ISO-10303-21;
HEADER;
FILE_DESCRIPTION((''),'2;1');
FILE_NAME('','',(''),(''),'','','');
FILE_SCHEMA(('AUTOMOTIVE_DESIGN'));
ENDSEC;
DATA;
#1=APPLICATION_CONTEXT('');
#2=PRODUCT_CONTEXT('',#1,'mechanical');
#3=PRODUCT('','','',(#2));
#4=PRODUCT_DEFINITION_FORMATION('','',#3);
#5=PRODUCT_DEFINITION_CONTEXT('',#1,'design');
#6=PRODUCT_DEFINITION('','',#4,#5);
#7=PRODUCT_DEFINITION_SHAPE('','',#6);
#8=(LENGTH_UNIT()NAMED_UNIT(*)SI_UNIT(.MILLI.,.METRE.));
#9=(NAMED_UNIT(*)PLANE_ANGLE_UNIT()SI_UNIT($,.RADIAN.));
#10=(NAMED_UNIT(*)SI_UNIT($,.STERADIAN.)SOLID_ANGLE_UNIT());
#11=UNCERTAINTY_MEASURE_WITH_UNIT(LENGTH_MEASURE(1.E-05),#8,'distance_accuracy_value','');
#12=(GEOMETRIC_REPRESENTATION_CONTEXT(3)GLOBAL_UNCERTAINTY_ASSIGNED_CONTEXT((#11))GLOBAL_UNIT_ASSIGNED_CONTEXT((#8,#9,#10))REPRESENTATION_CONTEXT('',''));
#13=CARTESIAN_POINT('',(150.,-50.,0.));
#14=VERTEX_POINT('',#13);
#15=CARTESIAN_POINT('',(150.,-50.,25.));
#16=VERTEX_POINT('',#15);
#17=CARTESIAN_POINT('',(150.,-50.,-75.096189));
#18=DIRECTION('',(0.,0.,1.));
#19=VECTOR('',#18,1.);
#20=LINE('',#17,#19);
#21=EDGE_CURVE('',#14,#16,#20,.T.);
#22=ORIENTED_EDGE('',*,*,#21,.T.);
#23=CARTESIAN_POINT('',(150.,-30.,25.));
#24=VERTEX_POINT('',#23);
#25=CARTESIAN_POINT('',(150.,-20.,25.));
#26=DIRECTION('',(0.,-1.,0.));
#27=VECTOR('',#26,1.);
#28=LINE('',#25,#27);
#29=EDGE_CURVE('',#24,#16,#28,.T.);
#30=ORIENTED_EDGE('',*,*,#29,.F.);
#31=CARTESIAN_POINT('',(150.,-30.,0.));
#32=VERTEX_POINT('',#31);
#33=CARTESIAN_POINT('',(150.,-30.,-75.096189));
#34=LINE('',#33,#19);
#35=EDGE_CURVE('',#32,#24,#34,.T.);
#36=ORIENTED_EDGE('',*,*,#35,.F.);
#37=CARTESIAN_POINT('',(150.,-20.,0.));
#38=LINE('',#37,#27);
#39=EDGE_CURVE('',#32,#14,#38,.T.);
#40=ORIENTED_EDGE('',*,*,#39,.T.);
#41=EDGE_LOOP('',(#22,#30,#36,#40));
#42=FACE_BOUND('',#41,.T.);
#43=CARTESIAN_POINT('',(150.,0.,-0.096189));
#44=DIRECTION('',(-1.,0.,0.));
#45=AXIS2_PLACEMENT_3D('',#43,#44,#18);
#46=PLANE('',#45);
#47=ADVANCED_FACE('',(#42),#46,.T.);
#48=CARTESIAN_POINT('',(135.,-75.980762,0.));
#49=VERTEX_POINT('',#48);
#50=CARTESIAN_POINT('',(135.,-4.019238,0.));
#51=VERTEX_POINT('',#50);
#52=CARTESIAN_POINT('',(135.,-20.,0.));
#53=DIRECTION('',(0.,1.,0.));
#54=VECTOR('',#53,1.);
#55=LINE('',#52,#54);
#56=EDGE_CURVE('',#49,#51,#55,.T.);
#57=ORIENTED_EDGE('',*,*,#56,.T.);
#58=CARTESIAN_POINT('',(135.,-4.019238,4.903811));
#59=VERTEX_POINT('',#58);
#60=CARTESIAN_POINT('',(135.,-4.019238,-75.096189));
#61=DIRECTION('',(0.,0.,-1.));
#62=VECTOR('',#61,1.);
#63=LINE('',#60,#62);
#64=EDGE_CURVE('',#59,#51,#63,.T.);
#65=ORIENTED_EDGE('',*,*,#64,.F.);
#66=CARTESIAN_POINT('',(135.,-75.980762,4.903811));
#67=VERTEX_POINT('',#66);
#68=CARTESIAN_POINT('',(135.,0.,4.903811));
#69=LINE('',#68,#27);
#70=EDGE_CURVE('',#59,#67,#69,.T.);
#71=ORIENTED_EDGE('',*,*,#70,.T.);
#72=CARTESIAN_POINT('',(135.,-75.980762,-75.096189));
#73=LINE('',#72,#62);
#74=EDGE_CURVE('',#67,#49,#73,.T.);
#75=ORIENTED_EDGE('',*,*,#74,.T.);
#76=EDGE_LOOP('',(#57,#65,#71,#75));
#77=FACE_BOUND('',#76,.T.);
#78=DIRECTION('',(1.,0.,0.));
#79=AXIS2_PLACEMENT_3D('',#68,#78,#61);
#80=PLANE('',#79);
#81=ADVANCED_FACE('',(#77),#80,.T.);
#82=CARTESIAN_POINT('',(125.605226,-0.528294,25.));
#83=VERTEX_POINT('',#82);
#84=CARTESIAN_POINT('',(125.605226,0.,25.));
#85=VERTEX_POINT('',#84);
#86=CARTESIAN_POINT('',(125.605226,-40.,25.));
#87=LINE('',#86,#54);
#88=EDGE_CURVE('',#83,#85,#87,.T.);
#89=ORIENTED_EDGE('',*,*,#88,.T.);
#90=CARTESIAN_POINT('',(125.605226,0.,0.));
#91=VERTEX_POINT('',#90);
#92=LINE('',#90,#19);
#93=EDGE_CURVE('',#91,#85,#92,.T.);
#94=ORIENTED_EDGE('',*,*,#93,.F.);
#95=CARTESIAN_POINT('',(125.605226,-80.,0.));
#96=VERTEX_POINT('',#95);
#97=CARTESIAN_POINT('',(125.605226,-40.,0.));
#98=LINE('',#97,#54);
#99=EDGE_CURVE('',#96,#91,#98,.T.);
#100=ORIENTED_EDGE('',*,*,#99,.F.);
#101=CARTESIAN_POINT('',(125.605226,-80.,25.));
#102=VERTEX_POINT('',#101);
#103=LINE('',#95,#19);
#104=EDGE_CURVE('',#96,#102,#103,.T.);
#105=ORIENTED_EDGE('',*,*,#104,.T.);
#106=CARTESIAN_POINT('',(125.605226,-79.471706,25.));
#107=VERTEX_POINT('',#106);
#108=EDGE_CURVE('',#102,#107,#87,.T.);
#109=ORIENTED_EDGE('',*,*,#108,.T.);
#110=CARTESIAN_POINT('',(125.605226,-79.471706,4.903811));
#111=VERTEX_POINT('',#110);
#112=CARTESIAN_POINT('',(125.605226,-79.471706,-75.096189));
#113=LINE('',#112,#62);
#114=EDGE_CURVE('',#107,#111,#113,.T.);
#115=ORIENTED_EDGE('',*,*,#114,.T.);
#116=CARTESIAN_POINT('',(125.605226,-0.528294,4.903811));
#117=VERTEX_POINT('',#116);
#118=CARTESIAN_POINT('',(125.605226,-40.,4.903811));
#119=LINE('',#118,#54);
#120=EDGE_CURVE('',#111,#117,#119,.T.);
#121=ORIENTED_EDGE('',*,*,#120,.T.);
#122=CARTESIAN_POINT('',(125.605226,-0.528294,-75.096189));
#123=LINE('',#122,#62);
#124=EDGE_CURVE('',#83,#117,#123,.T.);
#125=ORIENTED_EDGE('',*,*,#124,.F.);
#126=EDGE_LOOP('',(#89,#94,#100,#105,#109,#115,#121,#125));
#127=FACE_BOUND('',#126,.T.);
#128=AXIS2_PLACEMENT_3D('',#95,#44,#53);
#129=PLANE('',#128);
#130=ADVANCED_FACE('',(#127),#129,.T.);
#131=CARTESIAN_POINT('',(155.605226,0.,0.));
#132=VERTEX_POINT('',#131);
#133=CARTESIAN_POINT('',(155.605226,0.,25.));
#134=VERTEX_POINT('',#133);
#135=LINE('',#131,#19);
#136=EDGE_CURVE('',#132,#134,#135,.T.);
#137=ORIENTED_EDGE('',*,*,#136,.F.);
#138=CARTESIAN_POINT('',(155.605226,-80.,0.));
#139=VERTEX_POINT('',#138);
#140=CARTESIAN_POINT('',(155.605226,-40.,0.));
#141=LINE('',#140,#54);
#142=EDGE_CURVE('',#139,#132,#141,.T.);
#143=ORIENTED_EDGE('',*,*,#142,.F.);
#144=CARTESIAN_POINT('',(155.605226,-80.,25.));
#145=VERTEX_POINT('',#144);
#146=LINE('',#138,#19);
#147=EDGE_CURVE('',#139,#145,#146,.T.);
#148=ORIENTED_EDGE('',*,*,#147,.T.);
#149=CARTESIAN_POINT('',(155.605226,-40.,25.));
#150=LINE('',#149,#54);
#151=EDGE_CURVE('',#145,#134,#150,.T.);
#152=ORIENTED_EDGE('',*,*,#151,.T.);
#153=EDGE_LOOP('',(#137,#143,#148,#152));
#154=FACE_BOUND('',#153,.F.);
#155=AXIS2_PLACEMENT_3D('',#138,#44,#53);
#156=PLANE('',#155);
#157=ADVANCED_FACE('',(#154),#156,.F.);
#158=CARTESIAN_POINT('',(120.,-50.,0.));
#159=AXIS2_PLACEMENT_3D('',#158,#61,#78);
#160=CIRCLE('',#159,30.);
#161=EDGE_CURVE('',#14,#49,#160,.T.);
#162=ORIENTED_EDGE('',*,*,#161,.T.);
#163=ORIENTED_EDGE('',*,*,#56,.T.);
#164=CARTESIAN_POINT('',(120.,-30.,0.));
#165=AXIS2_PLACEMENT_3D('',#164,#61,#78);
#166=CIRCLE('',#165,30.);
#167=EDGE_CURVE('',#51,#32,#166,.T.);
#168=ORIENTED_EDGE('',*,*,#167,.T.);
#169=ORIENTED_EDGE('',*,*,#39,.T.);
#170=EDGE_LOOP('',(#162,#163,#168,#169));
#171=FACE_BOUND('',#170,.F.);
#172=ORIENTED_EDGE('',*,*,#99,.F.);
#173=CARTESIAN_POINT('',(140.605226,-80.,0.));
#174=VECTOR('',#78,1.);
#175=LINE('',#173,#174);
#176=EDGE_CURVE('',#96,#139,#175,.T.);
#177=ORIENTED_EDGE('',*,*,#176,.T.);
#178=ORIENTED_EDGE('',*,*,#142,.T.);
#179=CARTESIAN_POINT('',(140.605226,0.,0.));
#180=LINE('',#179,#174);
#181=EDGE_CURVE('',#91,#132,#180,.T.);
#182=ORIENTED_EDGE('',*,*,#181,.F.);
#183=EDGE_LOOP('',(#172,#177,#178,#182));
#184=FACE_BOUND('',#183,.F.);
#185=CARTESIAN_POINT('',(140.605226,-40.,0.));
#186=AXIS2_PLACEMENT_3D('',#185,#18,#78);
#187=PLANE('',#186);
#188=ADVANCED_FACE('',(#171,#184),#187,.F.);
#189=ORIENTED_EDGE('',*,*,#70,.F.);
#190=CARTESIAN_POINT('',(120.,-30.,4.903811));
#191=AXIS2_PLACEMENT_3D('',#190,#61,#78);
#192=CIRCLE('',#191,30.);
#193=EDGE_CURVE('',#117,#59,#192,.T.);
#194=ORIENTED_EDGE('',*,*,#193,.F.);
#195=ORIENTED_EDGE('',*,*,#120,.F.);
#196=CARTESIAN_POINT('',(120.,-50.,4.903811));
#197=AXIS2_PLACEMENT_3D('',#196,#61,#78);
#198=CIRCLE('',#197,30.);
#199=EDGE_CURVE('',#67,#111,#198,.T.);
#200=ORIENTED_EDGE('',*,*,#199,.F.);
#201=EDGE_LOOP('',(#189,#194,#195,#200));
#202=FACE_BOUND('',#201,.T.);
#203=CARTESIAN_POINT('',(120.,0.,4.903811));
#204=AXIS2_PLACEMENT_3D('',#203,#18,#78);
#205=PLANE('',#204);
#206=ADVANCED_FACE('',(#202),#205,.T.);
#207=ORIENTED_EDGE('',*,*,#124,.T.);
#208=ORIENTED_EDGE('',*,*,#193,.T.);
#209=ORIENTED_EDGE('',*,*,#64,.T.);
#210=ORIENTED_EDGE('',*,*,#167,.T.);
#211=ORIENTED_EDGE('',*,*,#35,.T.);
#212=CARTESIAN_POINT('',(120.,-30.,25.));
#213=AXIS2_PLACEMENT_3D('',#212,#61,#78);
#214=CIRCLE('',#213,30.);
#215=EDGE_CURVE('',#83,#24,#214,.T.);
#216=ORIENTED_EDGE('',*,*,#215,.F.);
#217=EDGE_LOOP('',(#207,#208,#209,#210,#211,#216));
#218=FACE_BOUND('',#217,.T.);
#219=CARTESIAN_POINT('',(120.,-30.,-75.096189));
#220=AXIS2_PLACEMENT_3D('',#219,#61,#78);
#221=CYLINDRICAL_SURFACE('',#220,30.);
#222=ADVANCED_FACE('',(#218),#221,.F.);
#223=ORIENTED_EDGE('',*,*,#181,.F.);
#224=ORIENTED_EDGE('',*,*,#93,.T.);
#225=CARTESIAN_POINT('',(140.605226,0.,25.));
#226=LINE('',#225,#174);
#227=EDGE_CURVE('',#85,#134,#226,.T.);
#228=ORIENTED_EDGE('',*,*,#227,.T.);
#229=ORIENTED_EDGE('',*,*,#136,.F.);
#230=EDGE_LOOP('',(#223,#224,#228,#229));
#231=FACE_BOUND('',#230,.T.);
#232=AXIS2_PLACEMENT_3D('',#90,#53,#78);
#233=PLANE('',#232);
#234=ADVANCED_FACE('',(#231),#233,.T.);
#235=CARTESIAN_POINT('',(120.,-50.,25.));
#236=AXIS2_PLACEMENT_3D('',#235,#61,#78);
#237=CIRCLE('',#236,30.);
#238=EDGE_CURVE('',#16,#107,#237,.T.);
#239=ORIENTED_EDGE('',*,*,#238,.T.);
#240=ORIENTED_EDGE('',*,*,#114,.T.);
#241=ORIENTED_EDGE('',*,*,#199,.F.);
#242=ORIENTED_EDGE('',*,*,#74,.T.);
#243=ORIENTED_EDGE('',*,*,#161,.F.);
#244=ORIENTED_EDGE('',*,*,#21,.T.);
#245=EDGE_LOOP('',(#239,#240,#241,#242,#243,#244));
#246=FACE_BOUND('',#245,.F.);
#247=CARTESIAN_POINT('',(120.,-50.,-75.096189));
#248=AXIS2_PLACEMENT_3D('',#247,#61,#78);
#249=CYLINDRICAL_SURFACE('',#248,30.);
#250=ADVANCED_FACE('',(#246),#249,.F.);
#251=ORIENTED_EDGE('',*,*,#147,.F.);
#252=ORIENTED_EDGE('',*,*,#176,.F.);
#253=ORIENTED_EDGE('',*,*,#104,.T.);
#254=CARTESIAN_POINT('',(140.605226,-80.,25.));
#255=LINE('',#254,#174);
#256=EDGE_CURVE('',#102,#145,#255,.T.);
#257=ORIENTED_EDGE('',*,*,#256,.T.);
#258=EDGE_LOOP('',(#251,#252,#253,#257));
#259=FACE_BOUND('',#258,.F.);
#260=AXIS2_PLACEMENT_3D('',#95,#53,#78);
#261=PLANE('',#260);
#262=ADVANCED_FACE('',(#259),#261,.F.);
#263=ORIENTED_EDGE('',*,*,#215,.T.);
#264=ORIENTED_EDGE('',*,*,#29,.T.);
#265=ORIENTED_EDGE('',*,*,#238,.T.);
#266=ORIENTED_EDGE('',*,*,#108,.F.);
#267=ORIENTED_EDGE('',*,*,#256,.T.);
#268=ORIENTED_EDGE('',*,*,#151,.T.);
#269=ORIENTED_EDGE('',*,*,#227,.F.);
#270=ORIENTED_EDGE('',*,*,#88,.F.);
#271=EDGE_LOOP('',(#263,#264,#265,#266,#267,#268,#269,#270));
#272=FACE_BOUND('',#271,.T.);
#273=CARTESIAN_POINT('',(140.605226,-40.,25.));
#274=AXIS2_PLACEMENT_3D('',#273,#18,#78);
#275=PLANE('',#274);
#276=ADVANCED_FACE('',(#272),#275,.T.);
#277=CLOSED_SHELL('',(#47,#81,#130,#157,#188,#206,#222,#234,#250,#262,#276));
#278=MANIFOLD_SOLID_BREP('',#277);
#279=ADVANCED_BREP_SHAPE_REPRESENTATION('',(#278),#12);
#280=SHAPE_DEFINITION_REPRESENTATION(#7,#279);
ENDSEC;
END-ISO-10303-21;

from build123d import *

# Parameters (mm, degrees)
F1_DEPTH    = 80
F2_T1_DEPTH = 140
F2_T3_DEPTH = 85
F2_T6_ANGLE = 90
F2_T8_ANGLE = 90
F3_W        = 30
F3_H        = 80
F4_DEPTH    = 25


# Not quite as in the source:
# - a fillet or chamfer that OpenCascade refuses, or shapes differently, is made with other operations: its cross-section is extruded or revolved along the edge and cut away or added


with BuildPart() as f1:
    # F0 (on Front) → F1 (new body)
    with BuildSketch(Plane.XZ):
        with BuildLine():
            Line((85, 129.9038105677), (75, 129.9038105677))
            Line((75, 129.9038105677), (0, 0))
            Line((0, 0), (16.9389196682, 0))
            Line((16.9389196682, 0), (16.9389196682, 4.9038105677))
            Line((16.9389196682, 4.9038105677), (34.5854811567, 4.9038105677))
            Line((34.5854811567, 4.9038105677), (34.5854811567, 6.5063509461))
            ThreePointArc((34.5854811567, 6.5063509461), (36.2891898423, 19.4473032012), (41.2842109675, 31.5063509461))
            Line((41.2842109675, 31.5063509461), (86.5319459163, 109.8777268049))
            ThreePointArc((86.5319459163, 109.8777268049), (117.3568969946, 96.1773012088), (130, 64.9038105677))
            ThreePointArc((130, 64.9038105677), (127.4711560413, 41.3606586971), (120, 18.8916382651))
            Line((120, 18.8916382651), (120, 4.9038105677))
            Line((120, 4.9038105677), (135, 4.9038105677))
            Line((135, 4.9038105677), (135, -0.0961894323))
            Line((135, -0.0961894323), (150, -0.0961894323))
            Line((150, -0.0961894323), (150, 64.9038105677))
            ThreePointArc((150, 64.9038105677), (130.9619407771, 110.8657513448), (85, 129.9038105677))
        make_face()
    extrude(amount=F1_DEPTH)

    # F2: fillet of radius 30 on 2 edges, made by hand

    # F2_s2 → F2_t1 (cut)
    with BuildSketch(Plane.XY.offset(-75.0961894323)):
        with BuildLine():
            ThreePointArc((150, -50), (141.2132034356, -71.2132034356), (120, -80))
            Line((120, -80), (150, -80))
            Line((150, -80), (150, -50))
        make_face()
        with BuildLine():
            ThreePointArc((150, -30), (141.2132034356, -8.7867965644), (120, 0))
            Line((120, 0), (150, 0))
            Line((150, 0), (150, -30))
        make_face()
    extrude(amount=F2_T1_DEPTH, mode=Mode.SUBTRACT)

    # F2_s4 → F2_t3 (cut)
    with BuildSketch(Plane.YZ):
        with BuildLine():
            ThreePointArc((-50, 129.9038105677), (-71.2132034356, 121.1170140033), (-80, 99.9038105677))
            Line((-80, 99.9038105677), (-80, 129.9038105677))
            Line((-80, 129.9038105677), (-50, 129.9038105677))
        make_face()
        with BuildLine():
            ThreePointArc((-30, 129.9038105677), (-8.7867965644, 121.1170140033), (0, 99.9038105677))
            Line((0, 99.9038105677), (0, 129.9038105677))
            Line((0, 129.9038105677), (-30, 129.9038105677))
        make_face()
    extrude(amount=F2_T3_DEPTH, mode=Mode.SUBTRACT)

    # F2_s5 → F2_t6 (revolve, cut)
    with BuildSketch(Plane.XY.offset(64.9038105677)):
        with BuildLine():
            ThreePointArc((150, -30), (141.2132034356, -8.7867965644), (120, 0))
            Line((120, 0), (150, 0))
            Line((150, 0), (150, -30))
        make_face()
    revolve(axis=Axis((85, 0, 64.9038105677), (0, -1, 0)), revolution_arc=F2_T6_ANGLE, mode=Mode.SUBTRACT)

    # F2_s7 → F2_t8 (revolve, cut)
    with BuildSketch(Plane.XY.offset(64.9038105677)):
        with BuildLine():
            ThreePointArc((150, -50), (141.2132034356, -71.2132034356), (120, -80))
            Line((120, -80), (150, -80))
            Line((150, -80), (150, -50))
        make_face()
    revolve(axis=Axis((85, -80, 64.9038105677), (0, -1, 0)), revolution_arc=F2_T8_ANGLE, mode=Mode.SUBTRACT)


with BuildPart() as f4:
    # F3 (on Top) → F4 (new body)
    with BuildSketch(Plane.XY):
        with Locations((140.605225563, -40)):
            Rectangle(F3_W, F3_H)
    extrude(amount=F4_DEPTH)

    # F5: cut F1
    add(f1.part, mode=Mode.SUBTRACT)


solid = f4.part
